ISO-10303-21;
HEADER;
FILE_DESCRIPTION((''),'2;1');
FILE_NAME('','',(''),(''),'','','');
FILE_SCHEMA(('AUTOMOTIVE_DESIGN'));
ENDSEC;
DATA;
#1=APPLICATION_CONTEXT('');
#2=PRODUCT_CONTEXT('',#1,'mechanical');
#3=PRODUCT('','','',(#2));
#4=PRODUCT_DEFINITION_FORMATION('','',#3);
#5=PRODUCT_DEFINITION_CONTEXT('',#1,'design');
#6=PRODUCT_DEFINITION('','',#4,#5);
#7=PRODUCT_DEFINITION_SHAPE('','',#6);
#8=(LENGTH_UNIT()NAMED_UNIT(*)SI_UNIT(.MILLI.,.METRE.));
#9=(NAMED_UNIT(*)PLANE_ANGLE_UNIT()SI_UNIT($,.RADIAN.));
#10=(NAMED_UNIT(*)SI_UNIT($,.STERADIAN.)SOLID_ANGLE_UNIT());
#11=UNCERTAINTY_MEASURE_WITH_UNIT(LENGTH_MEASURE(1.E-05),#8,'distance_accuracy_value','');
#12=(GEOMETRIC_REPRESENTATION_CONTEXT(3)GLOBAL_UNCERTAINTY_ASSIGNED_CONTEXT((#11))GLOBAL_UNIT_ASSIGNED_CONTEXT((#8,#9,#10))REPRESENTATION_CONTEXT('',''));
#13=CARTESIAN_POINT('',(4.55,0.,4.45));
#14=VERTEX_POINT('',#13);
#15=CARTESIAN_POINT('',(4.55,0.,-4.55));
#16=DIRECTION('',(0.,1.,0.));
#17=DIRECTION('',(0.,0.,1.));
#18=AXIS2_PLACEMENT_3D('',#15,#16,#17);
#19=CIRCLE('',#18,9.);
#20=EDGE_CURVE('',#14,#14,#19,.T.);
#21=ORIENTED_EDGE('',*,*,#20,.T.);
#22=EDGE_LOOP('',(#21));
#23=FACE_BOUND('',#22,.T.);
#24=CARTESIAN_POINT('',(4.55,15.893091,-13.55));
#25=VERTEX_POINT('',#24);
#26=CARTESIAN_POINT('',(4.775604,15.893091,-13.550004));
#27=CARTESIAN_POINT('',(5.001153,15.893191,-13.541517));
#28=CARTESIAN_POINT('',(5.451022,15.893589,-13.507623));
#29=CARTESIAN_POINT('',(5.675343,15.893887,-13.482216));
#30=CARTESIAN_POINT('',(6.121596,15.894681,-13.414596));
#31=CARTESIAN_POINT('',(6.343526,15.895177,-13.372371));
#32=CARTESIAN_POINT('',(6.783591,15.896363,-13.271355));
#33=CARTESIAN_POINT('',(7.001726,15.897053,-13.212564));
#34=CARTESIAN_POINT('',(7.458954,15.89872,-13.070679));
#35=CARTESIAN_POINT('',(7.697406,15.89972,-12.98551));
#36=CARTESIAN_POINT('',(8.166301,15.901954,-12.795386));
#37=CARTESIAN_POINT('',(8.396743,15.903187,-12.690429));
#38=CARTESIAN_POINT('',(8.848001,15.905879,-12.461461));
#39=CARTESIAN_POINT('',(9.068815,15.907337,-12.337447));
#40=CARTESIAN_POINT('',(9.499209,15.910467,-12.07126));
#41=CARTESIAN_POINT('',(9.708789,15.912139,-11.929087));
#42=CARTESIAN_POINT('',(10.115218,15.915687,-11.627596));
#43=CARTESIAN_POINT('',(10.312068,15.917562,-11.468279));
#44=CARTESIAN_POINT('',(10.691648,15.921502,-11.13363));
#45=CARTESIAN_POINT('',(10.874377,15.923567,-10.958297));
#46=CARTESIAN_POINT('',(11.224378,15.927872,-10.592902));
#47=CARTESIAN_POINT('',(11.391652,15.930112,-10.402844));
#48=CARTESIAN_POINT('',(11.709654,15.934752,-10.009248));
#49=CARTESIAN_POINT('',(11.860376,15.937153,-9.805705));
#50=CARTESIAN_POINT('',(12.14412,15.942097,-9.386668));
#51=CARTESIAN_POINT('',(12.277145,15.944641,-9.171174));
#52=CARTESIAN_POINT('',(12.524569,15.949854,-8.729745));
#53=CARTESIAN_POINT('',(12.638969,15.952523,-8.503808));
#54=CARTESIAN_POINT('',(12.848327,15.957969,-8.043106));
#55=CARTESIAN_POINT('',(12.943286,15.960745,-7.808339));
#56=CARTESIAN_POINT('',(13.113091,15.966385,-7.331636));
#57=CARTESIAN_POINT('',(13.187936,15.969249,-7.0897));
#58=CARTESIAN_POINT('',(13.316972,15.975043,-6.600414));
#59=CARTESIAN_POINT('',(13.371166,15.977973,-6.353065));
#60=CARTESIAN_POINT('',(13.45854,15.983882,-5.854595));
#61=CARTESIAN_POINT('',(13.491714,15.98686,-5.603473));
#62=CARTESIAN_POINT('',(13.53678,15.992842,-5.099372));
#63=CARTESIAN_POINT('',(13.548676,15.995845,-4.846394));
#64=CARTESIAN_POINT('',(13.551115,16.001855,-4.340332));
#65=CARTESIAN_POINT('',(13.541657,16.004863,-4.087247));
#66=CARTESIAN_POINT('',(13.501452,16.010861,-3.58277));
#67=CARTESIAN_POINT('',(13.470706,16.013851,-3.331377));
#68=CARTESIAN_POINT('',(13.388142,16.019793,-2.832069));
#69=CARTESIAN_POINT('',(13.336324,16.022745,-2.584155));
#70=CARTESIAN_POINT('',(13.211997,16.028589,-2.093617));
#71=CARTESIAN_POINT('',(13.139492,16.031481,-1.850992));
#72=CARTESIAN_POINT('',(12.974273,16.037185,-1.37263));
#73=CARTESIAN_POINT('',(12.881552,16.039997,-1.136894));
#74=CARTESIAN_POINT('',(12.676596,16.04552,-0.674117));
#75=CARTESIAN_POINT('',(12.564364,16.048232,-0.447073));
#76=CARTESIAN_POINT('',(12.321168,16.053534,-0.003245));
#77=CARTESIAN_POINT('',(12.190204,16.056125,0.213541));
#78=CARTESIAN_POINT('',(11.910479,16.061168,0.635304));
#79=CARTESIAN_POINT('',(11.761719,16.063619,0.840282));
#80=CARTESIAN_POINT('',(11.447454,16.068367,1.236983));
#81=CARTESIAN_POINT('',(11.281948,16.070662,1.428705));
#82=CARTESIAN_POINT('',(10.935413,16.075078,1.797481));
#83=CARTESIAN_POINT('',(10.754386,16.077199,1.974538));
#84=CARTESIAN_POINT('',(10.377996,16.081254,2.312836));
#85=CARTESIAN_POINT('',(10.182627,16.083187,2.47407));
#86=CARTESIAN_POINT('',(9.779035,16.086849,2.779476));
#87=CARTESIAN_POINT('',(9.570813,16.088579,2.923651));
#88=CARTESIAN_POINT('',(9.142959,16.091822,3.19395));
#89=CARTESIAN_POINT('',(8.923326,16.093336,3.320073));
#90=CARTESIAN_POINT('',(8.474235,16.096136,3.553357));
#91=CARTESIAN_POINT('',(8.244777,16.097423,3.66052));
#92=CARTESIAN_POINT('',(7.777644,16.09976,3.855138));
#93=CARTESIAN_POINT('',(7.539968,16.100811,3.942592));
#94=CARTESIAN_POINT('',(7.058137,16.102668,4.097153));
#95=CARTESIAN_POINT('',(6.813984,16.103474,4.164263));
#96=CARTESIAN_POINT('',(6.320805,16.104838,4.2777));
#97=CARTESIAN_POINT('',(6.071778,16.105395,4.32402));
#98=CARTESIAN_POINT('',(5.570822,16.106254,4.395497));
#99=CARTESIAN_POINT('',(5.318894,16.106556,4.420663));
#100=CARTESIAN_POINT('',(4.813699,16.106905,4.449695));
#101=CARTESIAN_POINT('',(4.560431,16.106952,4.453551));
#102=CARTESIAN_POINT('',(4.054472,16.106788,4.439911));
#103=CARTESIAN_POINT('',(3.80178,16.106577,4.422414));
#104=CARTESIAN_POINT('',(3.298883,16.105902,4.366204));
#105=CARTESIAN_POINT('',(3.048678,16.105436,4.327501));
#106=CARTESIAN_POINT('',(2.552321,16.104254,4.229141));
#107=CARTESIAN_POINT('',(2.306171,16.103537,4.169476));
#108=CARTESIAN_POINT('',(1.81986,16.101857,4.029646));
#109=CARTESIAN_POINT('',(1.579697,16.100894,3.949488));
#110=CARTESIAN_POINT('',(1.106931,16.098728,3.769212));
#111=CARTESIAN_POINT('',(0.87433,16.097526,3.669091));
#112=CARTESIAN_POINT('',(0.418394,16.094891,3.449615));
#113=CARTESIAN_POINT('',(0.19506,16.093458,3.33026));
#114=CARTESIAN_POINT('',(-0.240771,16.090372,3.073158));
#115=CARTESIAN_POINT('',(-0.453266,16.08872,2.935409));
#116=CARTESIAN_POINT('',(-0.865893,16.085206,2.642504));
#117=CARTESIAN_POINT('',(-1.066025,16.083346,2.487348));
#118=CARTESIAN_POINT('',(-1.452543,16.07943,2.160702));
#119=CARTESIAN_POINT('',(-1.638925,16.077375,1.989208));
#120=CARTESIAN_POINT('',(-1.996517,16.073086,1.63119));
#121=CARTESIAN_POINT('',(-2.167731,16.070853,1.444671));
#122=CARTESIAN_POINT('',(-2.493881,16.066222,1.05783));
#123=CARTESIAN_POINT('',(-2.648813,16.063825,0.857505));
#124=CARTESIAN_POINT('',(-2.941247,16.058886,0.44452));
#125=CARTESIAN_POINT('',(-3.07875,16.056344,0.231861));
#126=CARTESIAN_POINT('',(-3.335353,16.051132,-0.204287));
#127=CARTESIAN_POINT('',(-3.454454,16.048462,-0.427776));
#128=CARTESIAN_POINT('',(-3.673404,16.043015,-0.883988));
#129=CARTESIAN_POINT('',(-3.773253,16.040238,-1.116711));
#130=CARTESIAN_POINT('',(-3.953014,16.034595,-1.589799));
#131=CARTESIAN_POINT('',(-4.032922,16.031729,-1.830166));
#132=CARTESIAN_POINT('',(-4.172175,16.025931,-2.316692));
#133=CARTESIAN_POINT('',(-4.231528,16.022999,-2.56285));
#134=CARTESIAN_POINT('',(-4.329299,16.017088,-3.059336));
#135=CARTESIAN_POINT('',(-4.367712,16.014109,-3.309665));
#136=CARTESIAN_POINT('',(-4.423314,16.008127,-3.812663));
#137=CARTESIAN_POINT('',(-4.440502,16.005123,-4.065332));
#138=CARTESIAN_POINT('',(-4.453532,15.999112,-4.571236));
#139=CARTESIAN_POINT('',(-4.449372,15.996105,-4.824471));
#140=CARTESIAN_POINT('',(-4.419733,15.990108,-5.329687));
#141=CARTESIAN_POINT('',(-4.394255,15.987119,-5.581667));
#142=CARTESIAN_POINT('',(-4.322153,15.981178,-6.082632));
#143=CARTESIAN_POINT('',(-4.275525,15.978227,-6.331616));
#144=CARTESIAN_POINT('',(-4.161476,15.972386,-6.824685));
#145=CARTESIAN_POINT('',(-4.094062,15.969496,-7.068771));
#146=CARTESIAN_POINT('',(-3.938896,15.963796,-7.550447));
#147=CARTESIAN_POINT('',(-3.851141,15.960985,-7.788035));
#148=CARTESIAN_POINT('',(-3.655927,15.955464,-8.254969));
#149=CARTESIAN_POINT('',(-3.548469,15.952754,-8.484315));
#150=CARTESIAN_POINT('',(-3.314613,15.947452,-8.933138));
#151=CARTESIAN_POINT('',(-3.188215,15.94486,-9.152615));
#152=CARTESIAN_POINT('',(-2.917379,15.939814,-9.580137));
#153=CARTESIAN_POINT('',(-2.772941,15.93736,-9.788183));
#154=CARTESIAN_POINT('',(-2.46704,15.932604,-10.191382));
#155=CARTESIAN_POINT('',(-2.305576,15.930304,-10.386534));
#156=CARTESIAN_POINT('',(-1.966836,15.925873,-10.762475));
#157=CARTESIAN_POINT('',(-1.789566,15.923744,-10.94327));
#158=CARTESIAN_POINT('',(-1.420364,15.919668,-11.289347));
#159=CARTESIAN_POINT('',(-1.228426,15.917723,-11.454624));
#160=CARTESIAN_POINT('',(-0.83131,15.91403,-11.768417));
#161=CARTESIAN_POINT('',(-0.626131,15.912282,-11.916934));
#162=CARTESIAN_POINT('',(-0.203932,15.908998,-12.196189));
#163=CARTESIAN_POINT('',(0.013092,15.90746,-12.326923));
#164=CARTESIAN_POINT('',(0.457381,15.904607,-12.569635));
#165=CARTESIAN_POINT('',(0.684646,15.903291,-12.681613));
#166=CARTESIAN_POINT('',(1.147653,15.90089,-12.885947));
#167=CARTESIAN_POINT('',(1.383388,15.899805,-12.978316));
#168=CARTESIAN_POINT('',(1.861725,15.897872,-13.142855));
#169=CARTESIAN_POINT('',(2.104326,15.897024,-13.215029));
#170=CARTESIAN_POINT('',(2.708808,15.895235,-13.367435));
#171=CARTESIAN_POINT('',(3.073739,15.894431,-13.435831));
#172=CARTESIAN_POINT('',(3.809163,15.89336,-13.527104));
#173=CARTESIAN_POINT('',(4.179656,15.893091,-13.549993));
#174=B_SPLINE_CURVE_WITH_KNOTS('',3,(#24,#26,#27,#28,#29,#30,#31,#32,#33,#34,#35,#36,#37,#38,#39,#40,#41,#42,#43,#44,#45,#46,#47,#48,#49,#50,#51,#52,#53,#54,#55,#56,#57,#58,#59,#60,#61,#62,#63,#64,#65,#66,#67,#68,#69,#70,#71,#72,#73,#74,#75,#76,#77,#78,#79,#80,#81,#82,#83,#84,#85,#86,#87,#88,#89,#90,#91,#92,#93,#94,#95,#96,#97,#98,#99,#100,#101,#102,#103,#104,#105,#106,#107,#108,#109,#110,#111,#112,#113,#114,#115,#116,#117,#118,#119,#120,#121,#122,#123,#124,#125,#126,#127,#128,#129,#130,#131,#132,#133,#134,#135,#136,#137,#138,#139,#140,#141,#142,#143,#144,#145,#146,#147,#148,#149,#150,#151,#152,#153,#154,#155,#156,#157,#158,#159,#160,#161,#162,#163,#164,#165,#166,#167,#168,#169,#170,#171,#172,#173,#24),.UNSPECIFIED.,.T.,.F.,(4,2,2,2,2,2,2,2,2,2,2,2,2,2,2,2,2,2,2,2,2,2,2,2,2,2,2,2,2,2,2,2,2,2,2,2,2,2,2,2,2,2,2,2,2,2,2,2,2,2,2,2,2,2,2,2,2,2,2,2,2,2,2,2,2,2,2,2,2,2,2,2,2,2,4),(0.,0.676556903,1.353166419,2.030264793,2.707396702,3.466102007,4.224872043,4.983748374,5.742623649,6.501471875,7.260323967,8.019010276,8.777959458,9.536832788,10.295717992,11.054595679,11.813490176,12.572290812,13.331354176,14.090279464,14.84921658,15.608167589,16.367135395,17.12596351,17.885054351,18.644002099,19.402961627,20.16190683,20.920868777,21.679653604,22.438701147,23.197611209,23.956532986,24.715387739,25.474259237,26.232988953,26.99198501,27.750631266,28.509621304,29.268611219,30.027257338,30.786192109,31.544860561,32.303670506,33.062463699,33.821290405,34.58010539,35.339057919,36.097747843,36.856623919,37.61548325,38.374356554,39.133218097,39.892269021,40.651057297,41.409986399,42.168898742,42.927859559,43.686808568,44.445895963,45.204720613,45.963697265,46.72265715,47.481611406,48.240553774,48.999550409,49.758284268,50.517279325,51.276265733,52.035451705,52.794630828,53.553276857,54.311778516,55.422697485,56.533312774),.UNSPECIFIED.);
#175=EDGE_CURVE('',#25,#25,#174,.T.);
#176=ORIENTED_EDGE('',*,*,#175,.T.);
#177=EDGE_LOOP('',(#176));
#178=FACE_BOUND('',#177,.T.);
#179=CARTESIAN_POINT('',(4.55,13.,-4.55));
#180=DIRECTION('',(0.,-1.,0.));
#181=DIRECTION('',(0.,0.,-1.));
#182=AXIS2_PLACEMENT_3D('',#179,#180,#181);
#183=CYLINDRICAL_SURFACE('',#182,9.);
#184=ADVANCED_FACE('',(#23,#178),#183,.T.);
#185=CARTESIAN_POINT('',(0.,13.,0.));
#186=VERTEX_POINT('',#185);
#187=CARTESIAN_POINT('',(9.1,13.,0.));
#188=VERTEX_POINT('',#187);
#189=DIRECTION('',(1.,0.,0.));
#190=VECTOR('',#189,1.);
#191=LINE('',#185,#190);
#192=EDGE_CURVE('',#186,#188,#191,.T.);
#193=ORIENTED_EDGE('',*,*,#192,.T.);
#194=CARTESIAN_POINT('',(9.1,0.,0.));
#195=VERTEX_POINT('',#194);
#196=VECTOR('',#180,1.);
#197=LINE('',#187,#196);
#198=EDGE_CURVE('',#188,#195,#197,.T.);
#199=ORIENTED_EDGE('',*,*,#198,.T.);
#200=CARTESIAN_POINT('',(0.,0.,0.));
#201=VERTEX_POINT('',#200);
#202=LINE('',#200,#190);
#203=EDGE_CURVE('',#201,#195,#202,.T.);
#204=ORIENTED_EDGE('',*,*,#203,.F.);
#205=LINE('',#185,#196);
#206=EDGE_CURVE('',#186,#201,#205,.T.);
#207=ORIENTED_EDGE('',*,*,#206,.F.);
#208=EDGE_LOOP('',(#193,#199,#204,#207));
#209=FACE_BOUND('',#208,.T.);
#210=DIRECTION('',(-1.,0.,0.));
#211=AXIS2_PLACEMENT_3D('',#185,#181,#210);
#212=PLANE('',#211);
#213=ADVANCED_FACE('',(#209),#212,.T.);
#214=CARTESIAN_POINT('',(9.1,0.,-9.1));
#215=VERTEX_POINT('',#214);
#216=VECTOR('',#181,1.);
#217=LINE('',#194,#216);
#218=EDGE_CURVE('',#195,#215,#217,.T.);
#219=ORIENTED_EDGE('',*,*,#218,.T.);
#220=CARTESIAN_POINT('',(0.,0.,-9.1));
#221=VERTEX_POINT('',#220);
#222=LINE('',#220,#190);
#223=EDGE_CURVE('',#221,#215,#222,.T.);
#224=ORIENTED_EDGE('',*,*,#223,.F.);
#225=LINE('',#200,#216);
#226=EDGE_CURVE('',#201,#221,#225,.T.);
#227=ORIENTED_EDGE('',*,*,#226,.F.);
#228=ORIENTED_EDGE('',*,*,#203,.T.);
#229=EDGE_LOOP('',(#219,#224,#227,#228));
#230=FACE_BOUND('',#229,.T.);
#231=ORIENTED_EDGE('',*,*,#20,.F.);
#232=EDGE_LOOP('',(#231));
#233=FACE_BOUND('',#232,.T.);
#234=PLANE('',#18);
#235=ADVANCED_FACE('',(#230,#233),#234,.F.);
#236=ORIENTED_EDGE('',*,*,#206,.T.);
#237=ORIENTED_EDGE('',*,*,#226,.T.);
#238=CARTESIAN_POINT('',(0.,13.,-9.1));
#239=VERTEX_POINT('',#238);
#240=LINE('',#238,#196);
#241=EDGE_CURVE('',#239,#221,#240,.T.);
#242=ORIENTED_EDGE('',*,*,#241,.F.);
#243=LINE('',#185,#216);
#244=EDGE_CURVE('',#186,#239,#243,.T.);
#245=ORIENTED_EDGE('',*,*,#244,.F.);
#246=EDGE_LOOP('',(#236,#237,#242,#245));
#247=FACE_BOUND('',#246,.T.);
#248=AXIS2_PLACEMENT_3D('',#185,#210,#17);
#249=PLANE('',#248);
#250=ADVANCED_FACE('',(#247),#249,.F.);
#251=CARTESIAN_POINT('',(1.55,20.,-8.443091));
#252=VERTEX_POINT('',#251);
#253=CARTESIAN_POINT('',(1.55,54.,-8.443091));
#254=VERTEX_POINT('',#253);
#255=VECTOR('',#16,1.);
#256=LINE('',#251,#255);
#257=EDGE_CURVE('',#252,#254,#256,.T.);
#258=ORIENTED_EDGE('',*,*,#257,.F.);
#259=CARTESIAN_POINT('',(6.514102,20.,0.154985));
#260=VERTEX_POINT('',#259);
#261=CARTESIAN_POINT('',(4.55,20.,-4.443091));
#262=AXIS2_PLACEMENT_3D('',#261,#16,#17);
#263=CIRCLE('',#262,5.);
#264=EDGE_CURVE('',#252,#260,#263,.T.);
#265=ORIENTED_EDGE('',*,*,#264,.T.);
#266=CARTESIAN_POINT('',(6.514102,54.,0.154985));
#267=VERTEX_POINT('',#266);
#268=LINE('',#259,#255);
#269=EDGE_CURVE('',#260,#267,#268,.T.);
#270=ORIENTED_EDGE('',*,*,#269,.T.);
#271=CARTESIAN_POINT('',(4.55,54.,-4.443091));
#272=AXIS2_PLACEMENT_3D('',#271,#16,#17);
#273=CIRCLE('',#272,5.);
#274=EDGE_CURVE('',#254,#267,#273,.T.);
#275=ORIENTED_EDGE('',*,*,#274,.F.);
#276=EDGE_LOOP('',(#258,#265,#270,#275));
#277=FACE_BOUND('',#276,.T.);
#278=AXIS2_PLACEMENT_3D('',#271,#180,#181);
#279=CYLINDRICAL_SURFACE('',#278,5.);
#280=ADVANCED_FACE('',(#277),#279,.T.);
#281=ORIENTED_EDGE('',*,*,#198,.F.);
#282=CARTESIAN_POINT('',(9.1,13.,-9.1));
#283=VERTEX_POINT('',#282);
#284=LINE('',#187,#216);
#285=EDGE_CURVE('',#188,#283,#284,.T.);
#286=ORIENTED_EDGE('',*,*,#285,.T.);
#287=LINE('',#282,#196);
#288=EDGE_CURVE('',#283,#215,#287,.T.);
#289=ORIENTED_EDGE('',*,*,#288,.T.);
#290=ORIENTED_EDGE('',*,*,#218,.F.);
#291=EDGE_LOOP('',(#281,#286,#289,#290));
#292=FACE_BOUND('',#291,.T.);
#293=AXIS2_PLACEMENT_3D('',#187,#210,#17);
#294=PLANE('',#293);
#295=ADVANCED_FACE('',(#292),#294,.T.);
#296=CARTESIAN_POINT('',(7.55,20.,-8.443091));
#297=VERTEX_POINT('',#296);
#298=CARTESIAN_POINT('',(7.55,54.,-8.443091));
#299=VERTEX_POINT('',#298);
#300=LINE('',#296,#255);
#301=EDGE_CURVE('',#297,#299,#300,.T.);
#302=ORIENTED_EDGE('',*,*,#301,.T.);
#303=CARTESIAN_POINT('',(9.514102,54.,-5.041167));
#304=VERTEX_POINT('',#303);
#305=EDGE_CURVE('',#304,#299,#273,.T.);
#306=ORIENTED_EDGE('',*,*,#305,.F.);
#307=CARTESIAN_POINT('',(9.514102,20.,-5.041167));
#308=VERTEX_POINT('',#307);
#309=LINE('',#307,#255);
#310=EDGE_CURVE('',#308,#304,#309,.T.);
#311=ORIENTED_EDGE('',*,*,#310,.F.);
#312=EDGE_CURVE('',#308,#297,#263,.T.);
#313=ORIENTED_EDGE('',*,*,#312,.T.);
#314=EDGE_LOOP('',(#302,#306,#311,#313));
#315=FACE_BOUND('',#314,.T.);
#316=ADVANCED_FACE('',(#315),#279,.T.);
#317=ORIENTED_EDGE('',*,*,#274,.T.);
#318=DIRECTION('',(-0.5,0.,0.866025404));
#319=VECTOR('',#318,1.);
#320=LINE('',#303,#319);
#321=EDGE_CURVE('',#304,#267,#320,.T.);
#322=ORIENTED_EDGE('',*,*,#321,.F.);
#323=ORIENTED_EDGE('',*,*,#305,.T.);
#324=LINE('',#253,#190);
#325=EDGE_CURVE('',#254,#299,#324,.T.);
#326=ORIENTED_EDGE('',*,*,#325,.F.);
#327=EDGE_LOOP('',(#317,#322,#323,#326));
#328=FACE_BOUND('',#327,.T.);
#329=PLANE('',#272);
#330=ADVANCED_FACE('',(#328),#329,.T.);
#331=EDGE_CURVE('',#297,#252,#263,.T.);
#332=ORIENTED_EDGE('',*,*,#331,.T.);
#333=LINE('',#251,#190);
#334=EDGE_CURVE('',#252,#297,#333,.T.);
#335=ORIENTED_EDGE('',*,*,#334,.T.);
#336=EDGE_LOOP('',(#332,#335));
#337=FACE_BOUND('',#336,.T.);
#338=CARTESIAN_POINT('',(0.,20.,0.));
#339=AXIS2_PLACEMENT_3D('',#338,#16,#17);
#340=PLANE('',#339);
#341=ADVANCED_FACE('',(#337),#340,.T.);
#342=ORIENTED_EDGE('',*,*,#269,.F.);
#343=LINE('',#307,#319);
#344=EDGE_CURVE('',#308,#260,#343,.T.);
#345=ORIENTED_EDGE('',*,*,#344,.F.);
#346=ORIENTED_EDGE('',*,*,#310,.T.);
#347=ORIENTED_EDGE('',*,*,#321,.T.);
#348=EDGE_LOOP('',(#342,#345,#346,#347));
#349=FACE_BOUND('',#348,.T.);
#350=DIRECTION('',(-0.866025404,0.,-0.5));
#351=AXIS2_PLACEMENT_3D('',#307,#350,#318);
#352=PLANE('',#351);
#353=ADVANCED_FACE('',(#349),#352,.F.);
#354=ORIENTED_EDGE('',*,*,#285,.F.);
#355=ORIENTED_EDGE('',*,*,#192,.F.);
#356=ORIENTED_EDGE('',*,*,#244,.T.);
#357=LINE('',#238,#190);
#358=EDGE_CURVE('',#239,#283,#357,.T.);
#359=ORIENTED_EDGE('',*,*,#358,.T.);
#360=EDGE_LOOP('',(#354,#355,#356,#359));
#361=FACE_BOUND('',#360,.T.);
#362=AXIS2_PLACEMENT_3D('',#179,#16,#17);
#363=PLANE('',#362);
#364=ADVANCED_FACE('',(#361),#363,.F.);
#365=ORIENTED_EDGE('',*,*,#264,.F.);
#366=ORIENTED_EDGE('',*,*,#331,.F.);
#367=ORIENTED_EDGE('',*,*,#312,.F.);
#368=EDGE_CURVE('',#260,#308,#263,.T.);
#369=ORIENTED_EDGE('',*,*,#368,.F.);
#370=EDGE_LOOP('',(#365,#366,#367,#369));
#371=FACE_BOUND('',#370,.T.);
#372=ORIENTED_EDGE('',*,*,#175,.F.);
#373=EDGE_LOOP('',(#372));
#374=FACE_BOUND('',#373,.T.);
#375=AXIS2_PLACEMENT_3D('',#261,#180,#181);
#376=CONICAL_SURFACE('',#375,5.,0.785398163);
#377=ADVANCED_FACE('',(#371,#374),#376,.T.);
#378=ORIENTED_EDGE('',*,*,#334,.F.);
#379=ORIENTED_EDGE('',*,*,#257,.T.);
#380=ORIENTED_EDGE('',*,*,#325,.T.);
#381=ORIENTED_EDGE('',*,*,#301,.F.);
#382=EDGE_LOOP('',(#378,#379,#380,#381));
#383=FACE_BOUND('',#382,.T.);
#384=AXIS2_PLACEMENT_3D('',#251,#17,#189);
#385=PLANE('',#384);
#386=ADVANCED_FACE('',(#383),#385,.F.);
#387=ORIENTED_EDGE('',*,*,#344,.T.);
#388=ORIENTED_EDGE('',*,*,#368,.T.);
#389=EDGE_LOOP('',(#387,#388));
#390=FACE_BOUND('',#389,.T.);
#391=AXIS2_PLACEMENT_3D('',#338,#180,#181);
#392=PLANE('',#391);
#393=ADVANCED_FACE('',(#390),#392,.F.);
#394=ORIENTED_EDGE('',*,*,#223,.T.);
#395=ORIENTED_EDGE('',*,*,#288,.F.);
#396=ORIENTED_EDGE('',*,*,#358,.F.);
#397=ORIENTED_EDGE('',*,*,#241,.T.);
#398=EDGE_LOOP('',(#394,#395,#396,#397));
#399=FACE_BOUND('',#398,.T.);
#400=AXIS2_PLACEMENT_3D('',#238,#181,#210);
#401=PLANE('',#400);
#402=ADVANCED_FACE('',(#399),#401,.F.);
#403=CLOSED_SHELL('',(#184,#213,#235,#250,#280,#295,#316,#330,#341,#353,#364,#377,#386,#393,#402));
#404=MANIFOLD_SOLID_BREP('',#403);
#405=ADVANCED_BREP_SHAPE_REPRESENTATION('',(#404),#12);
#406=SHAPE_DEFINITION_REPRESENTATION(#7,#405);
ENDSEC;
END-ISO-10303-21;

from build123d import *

# Parameters (mm, degrees)
SKETCH1_R           = 9
SKETCH1_W           = 9.1
SKETCH1_H           = 9.1
BOSS_EXTRUDE1_DEPTH = 13
SKETCH2_R           = 9
BOSS_EXTRUDE2_DEPTH = 1
SKETCH3_R           = 5
BOSS_EXTRUDE3_DEPTH = 40
CHAMFER1_SIZE       = 6
SKETCH4_W           = 6
SKETCH4_H           = 4.360376731
CUT_EXTRUDE1_DEPTH  = 34


with BuildPart() as part:
    # Sketch1 → Boss-Extrude1 (new body)
    with BuildSketch(Plane(origin=(0, 0, 0), x_dir=(1, 0, 0), z_dir=(0, 1, 0))):
        with Locations(Location((4.55, 4.55, 0), (0, 0, 90))):
            Circle(SKETCH1_R)
        with Locations((4.55, 4.55)):
            Rectangle(SKETCH1_W, SKETCH1_H, mode=Mode.SUBTRACT)
    extrude(amount=BOSS_EXTRUDE1_DEPTH)

    # Sketch2 → Boss-Extrude2 (add)
    with BuildSketch(Plane(origin=(0, 13, 0), x_dir=(1, 0, 0), z_dir=(0, 1, 0))):
        with Locations(Location((4.55, 4.55, 0), (0, 0, 90))):
            Circle(SKETCH2_R)
    extrude(amount=BOSS_EXTRUDE2_DEPTH)

    # Sketch3 → Boss-Extrude3 (add)
    with BuildSketch(Plane(origin=(0, 14, 0), x_dir=(1, 0, 0), z_dir=(0, 1, 0))):
        with Locations(Location((4.55, 4.443091139, 0), (0, 0, 270))):
            Circle(SKETCH3_R)
    extrude(amount=BOSS_EXTRUDE3_DEPTH)

    # Chamfer1
    # the kernel refuses this chamfer: 6 mm, written as the material it adds along each edge
    with BuildSketch(Plane(origin=(4.55, 14, -4.443091139), x_dir=(0, 0, 1), z_dir=(-1, 0, 0))) as chamfer1_piece_1_section:
        Polygon((5 + CHAMFER1_SIZE, 0), (5, CHAMFER1_SIZE), (5, 0), align=None)
    chamfer1_piece_1 = revolve(axis=Axis((4.55, 14, -4.443091139), (0, 1, 0)), mode=Mode.PRIVATE)
    chamfer1_piece_1 = chamfer1_piece_1 & Plane(origin=(4.55, 17.968075817, -4.55), x_dir=(0, 0, -1), z_dir=(0, -1, 0)) * Cylinder(9, 44, mode=Mode.PRIVATE)
    add(chamfer1_piece_1)

    # Sketch4 → Cut-Extrude1 (cut)
    with BuildSketch(Plane(origin=(0, 54, 0), x_dir=(1, 0, 0), z_dir=(0, 1, 0))):
        Polygon((13.290298635, 2.860978984), (9.514101615, 5.04116735), (6.514101615, -0.154985073), (10.290298635, -2.335173438), align=None)
        with Locations((4.55, 10.623279505)):
            Rectangle(SKETCH4_W, SKETCH4_H)
    extrude(amount=-CUT_EXTRUDE1_DEPTH, mode=Mode.SUBTRACT)


solid = part.part
